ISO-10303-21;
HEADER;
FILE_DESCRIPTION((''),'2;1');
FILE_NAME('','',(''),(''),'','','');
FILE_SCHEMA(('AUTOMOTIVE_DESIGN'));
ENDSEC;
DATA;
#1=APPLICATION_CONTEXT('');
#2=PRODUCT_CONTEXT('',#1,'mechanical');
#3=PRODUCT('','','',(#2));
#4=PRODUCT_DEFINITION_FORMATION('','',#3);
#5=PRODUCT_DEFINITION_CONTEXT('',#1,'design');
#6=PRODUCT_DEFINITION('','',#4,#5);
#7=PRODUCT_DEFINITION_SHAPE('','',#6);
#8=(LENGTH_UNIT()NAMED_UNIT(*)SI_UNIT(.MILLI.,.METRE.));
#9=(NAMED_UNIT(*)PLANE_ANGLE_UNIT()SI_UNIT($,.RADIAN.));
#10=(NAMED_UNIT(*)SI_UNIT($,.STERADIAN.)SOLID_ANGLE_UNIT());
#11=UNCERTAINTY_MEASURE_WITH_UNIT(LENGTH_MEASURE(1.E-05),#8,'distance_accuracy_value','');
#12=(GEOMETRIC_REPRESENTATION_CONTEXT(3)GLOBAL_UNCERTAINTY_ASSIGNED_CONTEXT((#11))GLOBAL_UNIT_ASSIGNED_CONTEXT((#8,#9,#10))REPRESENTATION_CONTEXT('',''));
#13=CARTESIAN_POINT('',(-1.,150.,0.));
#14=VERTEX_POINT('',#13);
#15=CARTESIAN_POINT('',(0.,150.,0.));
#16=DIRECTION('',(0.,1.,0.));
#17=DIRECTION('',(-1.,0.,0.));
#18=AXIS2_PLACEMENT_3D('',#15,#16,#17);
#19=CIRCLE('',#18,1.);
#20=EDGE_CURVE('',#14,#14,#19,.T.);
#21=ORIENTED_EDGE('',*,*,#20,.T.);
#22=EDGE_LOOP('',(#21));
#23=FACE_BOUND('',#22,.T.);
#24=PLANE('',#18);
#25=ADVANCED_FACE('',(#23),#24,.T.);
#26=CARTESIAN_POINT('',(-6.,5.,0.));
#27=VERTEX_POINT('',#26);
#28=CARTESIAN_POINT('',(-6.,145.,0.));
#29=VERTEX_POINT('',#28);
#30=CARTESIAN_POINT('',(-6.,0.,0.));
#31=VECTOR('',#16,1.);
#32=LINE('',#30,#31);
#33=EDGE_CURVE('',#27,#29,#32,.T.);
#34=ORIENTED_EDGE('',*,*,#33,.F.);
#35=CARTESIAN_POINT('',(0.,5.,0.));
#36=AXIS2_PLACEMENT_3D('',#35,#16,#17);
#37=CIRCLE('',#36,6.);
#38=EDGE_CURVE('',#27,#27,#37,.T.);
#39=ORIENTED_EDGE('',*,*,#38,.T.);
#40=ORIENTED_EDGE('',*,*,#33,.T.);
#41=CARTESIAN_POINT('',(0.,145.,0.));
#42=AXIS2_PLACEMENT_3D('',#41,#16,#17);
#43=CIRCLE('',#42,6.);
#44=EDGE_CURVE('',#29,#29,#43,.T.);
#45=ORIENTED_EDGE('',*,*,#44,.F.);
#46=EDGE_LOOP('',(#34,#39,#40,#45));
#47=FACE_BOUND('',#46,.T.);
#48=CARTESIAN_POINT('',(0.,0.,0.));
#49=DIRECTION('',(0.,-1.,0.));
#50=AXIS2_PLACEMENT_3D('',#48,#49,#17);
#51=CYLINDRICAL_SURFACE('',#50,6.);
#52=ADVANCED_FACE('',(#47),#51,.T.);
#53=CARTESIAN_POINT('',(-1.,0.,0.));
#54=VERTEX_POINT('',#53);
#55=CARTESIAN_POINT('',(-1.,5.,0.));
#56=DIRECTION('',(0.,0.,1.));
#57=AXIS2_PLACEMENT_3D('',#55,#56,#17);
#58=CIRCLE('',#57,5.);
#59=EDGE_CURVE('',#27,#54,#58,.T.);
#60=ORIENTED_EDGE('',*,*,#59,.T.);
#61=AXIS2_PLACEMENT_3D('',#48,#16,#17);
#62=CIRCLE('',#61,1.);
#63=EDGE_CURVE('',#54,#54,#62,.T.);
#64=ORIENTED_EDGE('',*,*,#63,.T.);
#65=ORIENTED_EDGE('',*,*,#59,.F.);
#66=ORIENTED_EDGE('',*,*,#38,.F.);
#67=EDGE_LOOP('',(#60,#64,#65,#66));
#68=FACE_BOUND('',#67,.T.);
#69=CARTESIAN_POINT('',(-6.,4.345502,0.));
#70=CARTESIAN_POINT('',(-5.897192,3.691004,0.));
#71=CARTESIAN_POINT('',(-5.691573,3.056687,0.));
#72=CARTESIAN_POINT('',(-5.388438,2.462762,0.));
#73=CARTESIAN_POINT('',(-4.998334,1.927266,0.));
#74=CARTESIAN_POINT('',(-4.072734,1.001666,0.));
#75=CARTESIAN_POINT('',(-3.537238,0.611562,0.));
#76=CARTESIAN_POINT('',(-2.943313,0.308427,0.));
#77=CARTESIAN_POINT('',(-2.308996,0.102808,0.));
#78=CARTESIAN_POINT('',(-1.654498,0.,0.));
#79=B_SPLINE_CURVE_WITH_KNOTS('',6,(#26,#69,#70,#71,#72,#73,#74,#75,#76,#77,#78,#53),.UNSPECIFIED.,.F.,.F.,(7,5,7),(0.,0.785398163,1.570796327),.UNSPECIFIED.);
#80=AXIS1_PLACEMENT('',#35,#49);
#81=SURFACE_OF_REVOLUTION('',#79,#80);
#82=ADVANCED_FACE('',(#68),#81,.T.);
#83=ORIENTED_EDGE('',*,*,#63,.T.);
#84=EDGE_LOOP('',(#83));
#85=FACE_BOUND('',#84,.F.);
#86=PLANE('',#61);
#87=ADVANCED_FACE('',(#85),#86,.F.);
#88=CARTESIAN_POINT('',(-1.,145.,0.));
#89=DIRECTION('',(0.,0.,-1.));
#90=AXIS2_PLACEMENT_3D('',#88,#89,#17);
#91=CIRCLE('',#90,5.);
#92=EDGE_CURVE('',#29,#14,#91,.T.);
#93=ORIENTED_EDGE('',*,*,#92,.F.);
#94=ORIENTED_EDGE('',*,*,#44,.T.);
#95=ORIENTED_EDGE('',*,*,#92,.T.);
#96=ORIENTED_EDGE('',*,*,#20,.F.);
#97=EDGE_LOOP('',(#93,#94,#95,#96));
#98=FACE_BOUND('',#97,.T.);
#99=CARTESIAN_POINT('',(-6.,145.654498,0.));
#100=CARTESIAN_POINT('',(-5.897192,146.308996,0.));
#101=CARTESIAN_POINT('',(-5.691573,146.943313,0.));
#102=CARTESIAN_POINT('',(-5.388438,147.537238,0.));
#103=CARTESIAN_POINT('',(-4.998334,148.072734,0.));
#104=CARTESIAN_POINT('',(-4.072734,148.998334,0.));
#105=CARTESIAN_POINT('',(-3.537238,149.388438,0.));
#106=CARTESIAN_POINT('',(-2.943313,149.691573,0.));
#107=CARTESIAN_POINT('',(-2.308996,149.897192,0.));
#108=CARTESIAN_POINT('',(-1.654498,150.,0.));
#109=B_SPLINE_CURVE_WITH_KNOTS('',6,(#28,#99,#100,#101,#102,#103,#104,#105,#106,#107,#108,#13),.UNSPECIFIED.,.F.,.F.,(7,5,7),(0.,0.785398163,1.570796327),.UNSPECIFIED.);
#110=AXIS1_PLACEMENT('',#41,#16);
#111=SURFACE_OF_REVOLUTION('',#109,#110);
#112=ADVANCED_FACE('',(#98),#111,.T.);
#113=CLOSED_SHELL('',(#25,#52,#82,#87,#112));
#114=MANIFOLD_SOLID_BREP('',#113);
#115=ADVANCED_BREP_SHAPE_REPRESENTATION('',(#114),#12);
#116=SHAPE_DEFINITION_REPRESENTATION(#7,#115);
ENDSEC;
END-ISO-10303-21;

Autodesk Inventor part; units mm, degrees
ref_plane "YZ Plane" through (0, 0, 0) normal (1, 0, 0) x (0, 1, 0)
ref_plane "XZ Plane" through (0, 0, 0) normal (0, 1, 0) x (-1, 0, 0)
ref_plane "XY Plane" through (0, 0, 0) normal (0, 0, 1) x (1, 0, 0)
sketch "Sketch1" plane through (0, 0, 0) normal (0, 1, 0) x (-1, 0, 0)
  circle A0 centre (0, 0) radius 6
  dimension "d0" = 12
extrude "Extrusion1" add sketch "Sketch1" along normal blind 150
fillet "Fillet1" radius 5 1 edges at (6, 150, 0)
fillet "Fillet2" radius 5 1 edges at (6, 0, 0)
thread "Thread1" size "M12x1" class "6g" standard "ANSI Metric M Profile" length 11
properties part number "Griff"
